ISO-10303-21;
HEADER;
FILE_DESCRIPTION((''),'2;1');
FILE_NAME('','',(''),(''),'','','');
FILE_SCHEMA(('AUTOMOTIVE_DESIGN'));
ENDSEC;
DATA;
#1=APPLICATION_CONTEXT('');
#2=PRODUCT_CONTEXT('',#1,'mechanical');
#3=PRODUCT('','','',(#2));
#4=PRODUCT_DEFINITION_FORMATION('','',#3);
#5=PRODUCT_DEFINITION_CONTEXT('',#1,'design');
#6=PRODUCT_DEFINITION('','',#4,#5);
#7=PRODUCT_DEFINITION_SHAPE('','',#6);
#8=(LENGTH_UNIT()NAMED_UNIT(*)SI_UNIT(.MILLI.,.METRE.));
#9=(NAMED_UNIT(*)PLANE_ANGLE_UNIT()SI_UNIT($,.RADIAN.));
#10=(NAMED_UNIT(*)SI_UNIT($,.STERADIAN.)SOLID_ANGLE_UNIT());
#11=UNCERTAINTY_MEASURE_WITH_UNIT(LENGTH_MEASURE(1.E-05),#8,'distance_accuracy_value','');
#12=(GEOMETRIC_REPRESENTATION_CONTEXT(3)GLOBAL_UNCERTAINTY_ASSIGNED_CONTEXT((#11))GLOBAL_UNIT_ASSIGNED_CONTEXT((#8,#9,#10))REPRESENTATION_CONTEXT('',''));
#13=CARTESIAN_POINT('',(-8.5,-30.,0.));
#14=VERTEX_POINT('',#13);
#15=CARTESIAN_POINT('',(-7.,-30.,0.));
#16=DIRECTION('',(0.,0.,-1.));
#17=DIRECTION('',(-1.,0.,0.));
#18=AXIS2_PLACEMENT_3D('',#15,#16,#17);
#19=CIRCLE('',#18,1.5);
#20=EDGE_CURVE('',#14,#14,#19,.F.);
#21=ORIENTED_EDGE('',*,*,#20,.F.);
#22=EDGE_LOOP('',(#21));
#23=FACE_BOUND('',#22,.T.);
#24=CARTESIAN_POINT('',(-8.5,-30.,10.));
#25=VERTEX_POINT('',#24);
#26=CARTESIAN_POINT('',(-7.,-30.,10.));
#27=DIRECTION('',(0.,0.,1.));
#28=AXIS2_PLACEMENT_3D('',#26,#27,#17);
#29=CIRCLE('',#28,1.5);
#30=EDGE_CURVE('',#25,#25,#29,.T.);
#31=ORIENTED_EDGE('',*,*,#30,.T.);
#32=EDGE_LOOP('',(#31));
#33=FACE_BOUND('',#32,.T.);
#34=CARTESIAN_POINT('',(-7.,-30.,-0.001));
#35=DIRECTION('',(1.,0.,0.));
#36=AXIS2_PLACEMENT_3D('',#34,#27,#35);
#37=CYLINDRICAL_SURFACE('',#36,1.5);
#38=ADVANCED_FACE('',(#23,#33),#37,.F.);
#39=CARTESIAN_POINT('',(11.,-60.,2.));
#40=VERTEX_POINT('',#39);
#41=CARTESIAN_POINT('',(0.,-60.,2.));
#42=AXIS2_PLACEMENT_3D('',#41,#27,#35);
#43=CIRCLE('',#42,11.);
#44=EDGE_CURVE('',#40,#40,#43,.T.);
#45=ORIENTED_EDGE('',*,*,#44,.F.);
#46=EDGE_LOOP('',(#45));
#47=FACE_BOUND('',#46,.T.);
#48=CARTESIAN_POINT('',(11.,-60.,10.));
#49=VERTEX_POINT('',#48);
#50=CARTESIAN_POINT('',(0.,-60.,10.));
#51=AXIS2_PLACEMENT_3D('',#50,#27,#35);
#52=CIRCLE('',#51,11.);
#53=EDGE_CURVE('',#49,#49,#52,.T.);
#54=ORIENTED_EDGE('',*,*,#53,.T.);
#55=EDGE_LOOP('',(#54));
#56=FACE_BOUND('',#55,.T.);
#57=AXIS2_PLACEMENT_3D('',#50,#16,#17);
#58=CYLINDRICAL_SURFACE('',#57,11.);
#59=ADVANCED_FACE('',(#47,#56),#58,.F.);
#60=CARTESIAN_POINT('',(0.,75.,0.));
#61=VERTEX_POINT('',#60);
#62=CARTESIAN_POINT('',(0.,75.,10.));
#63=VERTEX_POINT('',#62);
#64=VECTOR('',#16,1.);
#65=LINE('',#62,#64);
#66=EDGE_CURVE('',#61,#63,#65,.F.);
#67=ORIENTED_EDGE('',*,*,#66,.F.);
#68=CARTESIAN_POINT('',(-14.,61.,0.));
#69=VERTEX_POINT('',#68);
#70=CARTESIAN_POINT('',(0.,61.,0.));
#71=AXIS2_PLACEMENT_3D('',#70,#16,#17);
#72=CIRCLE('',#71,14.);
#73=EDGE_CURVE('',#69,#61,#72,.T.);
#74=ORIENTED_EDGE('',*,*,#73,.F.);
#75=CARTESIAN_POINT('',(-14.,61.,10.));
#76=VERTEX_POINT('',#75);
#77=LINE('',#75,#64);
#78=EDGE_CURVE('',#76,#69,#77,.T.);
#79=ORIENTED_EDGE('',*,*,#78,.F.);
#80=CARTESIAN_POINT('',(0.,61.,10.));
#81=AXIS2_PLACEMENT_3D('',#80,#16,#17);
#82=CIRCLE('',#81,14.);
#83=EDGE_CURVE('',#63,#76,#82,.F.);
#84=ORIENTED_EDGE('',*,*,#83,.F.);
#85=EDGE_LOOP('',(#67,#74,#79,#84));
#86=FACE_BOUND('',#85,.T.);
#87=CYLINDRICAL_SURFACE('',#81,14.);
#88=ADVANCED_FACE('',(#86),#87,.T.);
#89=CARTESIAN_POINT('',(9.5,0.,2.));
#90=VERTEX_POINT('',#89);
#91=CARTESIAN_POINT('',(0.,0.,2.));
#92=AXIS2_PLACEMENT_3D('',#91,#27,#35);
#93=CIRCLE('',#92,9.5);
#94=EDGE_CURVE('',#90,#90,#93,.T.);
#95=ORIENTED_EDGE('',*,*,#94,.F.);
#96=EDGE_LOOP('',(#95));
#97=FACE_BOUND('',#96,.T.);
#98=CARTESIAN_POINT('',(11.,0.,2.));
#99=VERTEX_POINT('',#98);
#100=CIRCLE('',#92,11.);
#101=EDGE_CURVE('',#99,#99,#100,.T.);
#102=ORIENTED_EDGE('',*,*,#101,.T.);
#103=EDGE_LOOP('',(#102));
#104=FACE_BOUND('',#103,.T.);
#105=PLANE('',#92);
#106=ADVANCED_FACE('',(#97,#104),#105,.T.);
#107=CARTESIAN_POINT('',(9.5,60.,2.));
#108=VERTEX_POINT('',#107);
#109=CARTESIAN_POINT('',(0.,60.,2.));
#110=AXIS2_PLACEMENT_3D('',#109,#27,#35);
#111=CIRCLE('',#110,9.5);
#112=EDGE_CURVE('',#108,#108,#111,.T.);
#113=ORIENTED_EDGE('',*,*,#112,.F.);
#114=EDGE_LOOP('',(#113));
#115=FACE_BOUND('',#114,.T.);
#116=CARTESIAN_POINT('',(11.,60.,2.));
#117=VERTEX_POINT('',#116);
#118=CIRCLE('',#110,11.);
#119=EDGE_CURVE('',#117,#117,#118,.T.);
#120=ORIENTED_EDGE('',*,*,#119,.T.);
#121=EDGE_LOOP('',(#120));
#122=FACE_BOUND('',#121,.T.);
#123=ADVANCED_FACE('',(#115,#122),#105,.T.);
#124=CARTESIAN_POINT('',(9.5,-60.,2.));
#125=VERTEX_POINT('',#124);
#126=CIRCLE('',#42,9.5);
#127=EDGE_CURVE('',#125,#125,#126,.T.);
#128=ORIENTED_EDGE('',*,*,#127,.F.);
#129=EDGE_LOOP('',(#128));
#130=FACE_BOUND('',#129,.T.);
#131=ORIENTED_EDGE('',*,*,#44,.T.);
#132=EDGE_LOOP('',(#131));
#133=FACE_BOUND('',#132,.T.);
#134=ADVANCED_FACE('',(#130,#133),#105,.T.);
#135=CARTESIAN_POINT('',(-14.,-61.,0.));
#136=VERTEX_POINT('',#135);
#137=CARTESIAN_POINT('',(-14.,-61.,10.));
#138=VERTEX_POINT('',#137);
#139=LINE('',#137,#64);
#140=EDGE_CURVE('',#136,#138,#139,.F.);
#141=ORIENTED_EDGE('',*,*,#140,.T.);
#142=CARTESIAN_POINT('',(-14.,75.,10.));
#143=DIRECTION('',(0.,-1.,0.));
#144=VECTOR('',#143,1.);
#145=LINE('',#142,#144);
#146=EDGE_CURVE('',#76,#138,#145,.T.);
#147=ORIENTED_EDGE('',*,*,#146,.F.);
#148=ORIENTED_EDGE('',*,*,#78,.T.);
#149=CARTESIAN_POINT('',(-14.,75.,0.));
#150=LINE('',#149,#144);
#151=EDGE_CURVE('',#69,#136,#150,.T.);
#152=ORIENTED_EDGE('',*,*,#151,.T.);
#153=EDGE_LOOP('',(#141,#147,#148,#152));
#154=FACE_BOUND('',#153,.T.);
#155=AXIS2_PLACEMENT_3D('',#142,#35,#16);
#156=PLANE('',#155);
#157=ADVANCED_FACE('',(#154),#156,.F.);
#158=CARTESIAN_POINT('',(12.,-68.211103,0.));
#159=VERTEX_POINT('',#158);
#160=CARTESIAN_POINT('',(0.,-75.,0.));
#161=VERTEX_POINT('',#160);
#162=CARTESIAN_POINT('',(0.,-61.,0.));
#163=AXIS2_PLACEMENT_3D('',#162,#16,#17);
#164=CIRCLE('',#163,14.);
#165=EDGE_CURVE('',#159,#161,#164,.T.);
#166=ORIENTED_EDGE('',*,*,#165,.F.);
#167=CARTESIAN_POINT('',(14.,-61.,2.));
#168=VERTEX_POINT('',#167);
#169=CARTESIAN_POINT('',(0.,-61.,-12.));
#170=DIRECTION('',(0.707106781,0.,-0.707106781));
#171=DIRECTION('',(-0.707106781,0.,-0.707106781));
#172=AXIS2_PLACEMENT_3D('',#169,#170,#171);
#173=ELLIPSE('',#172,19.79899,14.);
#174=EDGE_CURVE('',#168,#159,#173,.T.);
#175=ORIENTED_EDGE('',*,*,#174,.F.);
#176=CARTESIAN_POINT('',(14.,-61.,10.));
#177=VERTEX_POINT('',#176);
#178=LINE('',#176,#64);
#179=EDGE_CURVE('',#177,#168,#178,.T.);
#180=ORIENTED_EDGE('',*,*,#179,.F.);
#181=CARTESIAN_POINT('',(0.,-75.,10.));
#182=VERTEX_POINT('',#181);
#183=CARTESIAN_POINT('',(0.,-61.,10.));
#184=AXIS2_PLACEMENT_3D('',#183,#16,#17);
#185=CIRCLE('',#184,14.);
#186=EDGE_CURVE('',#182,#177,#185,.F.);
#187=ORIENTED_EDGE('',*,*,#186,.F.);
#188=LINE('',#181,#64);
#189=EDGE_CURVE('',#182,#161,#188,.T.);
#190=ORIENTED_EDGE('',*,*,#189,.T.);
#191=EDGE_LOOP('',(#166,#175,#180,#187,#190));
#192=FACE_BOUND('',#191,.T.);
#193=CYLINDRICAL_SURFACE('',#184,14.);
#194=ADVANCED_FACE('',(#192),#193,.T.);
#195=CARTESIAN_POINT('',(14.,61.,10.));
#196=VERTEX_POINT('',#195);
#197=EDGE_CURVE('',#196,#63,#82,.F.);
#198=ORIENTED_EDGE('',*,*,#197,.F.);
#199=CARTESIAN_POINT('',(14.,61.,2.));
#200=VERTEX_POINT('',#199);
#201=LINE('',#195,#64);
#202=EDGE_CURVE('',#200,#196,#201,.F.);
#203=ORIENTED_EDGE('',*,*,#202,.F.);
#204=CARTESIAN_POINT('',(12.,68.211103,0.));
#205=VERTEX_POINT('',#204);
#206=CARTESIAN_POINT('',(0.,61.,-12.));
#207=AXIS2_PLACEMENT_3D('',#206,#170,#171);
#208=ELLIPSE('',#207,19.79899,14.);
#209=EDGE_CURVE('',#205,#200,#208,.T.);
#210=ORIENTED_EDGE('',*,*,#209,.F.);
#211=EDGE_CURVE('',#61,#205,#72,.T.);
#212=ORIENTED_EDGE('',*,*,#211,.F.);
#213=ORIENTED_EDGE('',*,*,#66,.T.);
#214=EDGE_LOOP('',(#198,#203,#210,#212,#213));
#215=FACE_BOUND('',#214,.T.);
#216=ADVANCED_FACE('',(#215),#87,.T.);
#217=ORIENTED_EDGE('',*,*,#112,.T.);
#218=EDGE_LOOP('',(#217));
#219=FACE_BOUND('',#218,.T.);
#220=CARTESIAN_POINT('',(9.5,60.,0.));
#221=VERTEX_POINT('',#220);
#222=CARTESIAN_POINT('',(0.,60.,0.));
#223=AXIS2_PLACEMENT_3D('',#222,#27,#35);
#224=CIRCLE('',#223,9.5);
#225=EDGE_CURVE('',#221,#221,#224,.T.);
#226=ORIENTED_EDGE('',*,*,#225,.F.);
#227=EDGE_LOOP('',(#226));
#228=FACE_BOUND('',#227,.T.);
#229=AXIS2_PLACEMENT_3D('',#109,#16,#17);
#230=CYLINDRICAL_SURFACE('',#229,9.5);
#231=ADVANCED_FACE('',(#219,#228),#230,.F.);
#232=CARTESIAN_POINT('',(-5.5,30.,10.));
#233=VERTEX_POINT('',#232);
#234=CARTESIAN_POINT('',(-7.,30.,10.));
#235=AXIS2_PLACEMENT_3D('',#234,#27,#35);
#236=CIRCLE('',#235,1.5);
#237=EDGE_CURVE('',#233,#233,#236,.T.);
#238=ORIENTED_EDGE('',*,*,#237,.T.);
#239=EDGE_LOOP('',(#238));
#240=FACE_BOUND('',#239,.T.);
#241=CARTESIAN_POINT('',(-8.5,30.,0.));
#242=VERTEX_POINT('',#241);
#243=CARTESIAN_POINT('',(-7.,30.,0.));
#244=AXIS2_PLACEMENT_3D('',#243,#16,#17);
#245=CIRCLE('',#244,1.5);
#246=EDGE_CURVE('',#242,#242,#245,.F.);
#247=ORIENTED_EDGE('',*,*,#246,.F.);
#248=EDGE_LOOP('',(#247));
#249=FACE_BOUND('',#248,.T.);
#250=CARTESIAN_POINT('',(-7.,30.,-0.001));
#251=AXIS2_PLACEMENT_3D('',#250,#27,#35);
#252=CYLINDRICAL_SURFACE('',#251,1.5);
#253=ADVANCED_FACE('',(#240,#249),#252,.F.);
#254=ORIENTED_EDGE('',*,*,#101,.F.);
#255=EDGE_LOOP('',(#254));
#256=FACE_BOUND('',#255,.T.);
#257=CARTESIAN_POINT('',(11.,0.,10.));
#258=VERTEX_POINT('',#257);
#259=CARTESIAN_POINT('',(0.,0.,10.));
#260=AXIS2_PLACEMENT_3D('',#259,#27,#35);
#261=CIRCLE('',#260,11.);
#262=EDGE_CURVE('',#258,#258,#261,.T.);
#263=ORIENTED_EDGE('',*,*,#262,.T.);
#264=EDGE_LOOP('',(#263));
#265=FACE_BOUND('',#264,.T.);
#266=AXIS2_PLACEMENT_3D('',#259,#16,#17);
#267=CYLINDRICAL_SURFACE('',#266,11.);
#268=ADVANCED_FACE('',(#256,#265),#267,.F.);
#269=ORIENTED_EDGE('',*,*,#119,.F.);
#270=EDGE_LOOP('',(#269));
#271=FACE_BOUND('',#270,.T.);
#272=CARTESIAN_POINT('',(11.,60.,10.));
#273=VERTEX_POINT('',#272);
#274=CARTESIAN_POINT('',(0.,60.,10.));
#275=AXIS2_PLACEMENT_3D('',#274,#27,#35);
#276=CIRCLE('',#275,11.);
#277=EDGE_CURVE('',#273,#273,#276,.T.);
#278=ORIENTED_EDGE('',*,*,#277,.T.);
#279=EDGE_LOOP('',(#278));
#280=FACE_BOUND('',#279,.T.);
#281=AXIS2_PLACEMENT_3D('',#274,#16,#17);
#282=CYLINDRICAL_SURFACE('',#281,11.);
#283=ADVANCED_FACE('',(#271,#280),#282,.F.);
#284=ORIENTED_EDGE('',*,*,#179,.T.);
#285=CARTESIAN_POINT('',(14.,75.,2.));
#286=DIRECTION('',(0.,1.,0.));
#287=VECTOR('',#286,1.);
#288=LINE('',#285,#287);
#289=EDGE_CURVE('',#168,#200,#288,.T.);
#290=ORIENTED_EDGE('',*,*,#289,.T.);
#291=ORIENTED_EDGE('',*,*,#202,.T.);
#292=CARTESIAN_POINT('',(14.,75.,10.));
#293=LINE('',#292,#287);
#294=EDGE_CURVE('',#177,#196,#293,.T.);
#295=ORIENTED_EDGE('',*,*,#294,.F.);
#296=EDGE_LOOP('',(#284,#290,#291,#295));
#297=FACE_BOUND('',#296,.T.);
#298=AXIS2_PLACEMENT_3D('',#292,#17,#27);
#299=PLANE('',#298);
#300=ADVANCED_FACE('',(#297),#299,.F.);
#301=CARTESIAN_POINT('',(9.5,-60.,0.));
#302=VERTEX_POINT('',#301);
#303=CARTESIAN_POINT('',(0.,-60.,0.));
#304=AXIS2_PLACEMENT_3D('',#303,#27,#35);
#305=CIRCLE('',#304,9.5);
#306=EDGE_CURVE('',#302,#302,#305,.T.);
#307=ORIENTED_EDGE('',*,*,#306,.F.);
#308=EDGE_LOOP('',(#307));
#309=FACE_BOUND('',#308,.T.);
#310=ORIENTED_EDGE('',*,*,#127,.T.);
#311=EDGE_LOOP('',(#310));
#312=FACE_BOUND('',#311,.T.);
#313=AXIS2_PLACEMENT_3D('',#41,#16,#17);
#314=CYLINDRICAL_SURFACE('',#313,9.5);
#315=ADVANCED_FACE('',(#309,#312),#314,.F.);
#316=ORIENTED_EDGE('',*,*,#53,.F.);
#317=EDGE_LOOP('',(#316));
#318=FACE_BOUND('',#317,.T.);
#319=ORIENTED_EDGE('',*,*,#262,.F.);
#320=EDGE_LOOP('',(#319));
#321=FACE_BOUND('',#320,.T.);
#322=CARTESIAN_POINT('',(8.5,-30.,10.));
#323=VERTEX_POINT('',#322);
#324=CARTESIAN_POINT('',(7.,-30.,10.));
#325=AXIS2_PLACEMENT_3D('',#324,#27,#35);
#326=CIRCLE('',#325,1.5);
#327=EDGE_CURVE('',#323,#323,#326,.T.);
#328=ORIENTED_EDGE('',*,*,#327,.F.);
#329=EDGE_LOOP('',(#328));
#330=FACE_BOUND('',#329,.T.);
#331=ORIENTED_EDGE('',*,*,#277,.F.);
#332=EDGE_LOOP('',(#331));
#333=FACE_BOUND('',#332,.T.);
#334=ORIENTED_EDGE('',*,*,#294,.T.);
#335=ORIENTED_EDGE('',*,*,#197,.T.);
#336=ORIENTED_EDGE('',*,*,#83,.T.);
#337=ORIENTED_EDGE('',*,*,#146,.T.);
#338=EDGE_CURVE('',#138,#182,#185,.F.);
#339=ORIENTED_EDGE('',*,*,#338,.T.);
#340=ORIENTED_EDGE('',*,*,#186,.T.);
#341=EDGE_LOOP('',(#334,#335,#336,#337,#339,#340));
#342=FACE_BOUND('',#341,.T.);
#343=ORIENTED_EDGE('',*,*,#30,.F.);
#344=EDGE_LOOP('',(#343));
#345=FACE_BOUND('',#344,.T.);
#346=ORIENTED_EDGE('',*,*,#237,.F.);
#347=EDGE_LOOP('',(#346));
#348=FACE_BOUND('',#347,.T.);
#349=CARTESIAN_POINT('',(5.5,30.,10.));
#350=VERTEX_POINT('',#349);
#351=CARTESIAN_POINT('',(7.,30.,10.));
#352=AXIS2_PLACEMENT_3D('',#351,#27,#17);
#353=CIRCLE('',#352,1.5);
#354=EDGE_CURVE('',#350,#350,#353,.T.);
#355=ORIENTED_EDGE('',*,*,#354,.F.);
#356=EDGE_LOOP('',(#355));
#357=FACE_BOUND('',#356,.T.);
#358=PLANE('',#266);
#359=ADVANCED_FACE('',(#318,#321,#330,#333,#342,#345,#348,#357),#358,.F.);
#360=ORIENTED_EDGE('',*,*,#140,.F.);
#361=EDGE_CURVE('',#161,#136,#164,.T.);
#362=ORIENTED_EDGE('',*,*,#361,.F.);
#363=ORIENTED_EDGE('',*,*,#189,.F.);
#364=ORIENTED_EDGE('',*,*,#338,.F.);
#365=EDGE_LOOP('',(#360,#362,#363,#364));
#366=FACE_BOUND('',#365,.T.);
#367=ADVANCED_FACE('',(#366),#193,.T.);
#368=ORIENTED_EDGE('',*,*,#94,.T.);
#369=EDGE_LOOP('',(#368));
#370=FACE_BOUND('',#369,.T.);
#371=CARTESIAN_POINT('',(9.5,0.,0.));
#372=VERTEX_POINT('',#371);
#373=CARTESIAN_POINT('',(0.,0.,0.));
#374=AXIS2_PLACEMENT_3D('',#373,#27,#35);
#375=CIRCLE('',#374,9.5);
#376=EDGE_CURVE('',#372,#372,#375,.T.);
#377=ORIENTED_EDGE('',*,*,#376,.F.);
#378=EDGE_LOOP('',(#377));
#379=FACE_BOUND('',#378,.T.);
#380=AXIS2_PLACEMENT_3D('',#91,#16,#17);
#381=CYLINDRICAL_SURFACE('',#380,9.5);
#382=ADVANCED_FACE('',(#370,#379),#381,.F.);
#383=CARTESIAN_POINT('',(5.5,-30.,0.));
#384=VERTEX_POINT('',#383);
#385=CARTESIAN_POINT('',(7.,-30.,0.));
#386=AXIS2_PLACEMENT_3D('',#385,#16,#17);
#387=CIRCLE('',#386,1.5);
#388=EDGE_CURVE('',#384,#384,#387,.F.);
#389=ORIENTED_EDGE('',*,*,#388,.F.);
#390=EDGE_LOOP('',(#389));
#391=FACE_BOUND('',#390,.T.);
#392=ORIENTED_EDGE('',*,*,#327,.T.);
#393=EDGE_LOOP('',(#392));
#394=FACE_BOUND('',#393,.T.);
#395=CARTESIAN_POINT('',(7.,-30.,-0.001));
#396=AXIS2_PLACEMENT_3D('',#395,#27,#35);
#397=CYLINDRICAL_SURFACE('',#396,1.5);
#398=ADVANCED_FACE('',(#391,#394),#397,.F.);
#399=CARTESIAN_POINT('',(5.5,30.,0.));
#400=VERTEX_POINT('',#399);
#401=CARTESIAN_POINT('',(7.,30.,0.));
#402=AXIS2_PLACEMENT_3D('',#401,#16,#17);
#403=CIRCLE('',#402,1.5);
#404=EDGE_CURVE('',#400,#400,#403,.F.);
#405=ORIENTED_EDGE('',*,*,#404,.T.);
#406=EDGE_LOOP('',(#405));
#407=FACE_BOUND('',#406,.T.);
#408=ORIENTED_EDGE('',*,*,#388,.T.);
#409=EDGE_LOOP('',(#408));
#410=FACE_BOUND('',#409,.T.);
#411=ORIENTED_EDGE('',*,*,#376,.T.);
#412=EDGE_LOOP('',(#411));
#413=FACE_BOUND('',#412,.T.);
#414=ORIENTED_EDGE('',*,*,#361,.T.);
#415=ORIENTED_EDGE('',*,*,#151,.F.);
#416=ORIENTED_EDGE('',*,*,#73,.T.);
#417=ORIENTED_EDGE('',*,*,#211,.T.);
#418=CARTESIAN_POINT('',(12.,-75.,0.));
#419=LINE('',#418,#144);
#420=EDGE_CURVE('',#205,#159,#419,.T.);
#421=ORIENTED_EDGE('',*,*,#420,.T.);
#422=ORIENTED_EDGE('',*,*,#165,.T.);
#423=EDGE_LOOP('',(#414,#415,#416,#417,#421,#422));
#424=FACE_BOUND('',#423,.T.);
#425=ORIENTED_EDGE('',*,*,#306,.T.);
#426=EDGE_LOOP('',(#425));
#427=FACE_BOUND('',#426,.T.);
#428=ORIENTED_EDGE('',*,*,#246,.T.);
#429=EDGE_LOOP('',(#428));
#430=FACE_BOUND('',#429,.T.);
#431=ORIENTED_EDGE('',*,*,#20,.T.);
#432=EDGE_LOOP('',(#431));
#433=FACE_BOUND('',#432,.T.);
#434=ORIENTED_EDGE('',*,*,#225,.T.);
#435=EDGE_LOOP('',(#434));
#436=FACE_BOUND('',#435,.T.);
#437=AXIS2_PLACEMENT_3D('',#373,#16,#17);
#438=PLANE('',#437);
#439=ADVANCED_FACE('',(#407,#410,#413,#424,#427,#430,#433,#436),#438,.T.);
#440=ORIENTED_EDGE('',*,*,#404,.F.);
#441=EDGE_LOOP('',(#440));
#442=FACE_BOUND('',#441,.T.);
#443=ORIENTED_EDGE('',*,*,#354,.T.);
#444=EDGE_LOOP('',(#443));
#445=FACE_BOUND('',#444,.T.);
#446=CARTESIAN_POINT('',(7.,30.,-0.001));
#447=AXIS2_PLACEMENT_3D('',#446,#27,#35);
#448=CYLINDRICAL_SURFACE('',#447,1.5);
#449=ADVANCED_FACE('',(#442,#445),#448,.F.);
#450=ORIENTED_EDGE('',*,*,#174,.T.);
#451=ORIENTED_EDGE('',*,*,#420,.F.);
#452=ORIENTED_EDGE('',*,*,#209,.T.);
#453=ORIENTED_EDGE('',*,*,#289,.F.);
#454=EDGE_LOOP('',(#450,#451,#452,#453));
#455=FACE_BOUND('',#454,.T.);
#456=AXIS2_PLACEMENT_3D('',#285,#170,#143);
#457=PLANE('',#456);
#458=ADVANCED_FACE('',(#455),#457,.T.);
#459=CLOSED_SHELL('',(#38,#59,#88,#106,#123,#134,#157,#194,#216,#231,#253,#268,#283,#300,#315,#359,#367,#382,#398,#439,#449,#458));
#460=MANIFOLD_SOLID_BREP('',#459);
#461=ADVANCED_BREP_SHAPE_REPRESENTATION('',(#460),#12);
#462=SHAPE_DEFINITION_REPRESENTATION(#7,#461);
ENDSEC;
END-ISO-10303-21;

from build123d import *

# Parameters (mm, degrees)
CROQUIS1_W              = 150
CROQUIS1_H              = 28
CROQUIS1_R              = 11
SALIENTE_EXTRUIR1_DEPTH = 10
CROQUIS2_W              = 150
CROQUIS2_H              = 28
CROQUIS2_R              = 9.5
SALIENTE_EXTRUIR2_DEPTH = 2
CHAFL_N1_SIZE           = 2
REDONDEO1_R             = 14
CORTAR_EXTRUIR1_REACH   = 78.948
CROQUIS3_R              = 1.5


with BuildPart() as part:
    # Croquis1 → Saliente-Extruir1 (new body)
    with BuildSketch(Plane(origin=(0, 0, 0), x_dir=(0, 1, 0), z_dir=(0, 0, 1))):
        Rectangle(CROQUIS1_W, CROQUIS1_H)
        with Locations(Location((0, 0, 0), (0, 0, 270))):
            Circle(CROQUIS1_R, mode=Mode.SUBTRACT)
        with Locations(Location((60, 0, 0), (0, 0, 270))):
            Circle(CROQUIS1_R, mode=Mode.SUBTRACT)
        with Locations(Location((-60, 0, 0), (0, 0, 270))):
            Circle(CROQUIS1_R, mode=Mode.SUBTRACT)
    extrude(amount=SALIENTE_EXTRUIR1_DEPTH)

    # Croquis2 → Saliente-Extruir2 (add)
    with BuildSketch(Plane(origin=(0, 0, 0), x_dir=(0, 1, 0), z_dir=(0, 0, 1))):
        Rectangle(CROQUIS2_W, CROQUIS2_H)
        with Locations(Location((0, 0, 0), (0, 0, 270))):
            Circle(CROQUIS2_R, mode=Mode.SUBTRACT)
        with Locations(Location((60, 0, 0), (0, 0, 270))):
            Circle(CROQUIS2_R, mode=Mode.SUBTRACT)
        with Locations(Location((-60, 0, 0), (0, 0, 270))):
            Circle(CROQUIS2_R, mode=Mode.SUBTRACT)
    extrude(amount=SALIENTE_EXTRUIR2_DEPTH)

    # Chaflán1
    chafl_n1_edges = [part.edges().sort_by_distance(p)[0] for p in [
        (14, 0, 0),
    ]]
    chamfer(chafl_n1_edges, length=CHAFL_N1_SIZE)

    # Redondeo1
    redondeo1_edges = [part.edges().sort_by_distance(p)[0] for p in [
        (14, 75, 6),
        (-14, 75, 5),
        (14, -75, 6),
        (-14, -75, 5),
    ]]
    fillet(redondeo1_edges, radius=REDONDEO1_R - 0.0001)  # a hair under: the kernel refuses the full size

    # Croquis3 → Cortar-Extruir1 (cut, up to next)
    with BuildSketch(Plane.XY.offset(10), mode=Mode.PRIVATE) as cortar_extruir1_sk1:
        with Locations((-7, 30)):
            Circle(CROQUIS3_R)
    cortar_extruir1_tool1 = extrude(cortar_extruir1_sk1.sketch, amount=-CORTAR_EXTRUIR1_REACH, mode=Mode.PRIVATE) & part.part
    # Croquis3 → Cortar-Extruir1 (cut, up to next)
    with BuildSketch(Plane.XY.offset(10), mode=Mode.PRIVATE) as cortar_extruir1_sk2:
        with Locations(Location((7, 30, 0), (0, 0, 180))):
            Circle(CROQUIS3_R)
    cortar_extruir1_tool2 = extrude(cortar_extruir1_sk2.sketch, amount=-CORTAR_EXTRUIR1_REACH, mode=Mode.PRIVATE) & part.part
    # Croquis3 → Cortar-Extruir1 (cut, up to next)
    with BuildSketch(Plane.XY.offset(10), mode=Mode.PRIVATE) as cortar_extruir1_sk3:
        with Locations((7, -30)):
            Circle(CROQUIS3_R)
    cortar_extruir1_tool3 = extrude(cortar_extruir1_sk3.sketch, amount=-CORTAR_EXTRUIR1_REACH, mode=Mode.PRIVATE) & part.part
    # Croquis3 → Cortar-Extruir1 (cut, up to next)
    with BuildSketch(Plane.XY.offset(10), mode=Mode.PRIVATE) as cortar_extruir1_sk4:
        with Locations(Location((-7, -30, 0), (0, 0, 180))):
            Circle(CROQUIS3_R)
    cortar_extruir1_tool4 = extrude(cortar_extruir1_sk4.sketch, amount=-CORTAR_EXTRUIR1_REACH, mode=Mode.PRIVATE) & part.part
    add(cortar_extruir1_tool1.solids().sort_by_distance((-7, 30, 10))[0], mode=Mode.SUBTRACT)
    add(cortar_extruir1_tool2.solids().sort_by_distance((7, 30, 10))[0], mode=Mode.SUBTRACT)
    add(cortar_extruir1_tool3.solids().sort_by_distance((7, -30, 10))[0], mode=Mode.SUBTRACT)
    add(cortar_extruir1_tool4.solids().sort_by_distance((-7, -30, 10))[0], mode=Mode.SUBTRACT)


solid = part.part
